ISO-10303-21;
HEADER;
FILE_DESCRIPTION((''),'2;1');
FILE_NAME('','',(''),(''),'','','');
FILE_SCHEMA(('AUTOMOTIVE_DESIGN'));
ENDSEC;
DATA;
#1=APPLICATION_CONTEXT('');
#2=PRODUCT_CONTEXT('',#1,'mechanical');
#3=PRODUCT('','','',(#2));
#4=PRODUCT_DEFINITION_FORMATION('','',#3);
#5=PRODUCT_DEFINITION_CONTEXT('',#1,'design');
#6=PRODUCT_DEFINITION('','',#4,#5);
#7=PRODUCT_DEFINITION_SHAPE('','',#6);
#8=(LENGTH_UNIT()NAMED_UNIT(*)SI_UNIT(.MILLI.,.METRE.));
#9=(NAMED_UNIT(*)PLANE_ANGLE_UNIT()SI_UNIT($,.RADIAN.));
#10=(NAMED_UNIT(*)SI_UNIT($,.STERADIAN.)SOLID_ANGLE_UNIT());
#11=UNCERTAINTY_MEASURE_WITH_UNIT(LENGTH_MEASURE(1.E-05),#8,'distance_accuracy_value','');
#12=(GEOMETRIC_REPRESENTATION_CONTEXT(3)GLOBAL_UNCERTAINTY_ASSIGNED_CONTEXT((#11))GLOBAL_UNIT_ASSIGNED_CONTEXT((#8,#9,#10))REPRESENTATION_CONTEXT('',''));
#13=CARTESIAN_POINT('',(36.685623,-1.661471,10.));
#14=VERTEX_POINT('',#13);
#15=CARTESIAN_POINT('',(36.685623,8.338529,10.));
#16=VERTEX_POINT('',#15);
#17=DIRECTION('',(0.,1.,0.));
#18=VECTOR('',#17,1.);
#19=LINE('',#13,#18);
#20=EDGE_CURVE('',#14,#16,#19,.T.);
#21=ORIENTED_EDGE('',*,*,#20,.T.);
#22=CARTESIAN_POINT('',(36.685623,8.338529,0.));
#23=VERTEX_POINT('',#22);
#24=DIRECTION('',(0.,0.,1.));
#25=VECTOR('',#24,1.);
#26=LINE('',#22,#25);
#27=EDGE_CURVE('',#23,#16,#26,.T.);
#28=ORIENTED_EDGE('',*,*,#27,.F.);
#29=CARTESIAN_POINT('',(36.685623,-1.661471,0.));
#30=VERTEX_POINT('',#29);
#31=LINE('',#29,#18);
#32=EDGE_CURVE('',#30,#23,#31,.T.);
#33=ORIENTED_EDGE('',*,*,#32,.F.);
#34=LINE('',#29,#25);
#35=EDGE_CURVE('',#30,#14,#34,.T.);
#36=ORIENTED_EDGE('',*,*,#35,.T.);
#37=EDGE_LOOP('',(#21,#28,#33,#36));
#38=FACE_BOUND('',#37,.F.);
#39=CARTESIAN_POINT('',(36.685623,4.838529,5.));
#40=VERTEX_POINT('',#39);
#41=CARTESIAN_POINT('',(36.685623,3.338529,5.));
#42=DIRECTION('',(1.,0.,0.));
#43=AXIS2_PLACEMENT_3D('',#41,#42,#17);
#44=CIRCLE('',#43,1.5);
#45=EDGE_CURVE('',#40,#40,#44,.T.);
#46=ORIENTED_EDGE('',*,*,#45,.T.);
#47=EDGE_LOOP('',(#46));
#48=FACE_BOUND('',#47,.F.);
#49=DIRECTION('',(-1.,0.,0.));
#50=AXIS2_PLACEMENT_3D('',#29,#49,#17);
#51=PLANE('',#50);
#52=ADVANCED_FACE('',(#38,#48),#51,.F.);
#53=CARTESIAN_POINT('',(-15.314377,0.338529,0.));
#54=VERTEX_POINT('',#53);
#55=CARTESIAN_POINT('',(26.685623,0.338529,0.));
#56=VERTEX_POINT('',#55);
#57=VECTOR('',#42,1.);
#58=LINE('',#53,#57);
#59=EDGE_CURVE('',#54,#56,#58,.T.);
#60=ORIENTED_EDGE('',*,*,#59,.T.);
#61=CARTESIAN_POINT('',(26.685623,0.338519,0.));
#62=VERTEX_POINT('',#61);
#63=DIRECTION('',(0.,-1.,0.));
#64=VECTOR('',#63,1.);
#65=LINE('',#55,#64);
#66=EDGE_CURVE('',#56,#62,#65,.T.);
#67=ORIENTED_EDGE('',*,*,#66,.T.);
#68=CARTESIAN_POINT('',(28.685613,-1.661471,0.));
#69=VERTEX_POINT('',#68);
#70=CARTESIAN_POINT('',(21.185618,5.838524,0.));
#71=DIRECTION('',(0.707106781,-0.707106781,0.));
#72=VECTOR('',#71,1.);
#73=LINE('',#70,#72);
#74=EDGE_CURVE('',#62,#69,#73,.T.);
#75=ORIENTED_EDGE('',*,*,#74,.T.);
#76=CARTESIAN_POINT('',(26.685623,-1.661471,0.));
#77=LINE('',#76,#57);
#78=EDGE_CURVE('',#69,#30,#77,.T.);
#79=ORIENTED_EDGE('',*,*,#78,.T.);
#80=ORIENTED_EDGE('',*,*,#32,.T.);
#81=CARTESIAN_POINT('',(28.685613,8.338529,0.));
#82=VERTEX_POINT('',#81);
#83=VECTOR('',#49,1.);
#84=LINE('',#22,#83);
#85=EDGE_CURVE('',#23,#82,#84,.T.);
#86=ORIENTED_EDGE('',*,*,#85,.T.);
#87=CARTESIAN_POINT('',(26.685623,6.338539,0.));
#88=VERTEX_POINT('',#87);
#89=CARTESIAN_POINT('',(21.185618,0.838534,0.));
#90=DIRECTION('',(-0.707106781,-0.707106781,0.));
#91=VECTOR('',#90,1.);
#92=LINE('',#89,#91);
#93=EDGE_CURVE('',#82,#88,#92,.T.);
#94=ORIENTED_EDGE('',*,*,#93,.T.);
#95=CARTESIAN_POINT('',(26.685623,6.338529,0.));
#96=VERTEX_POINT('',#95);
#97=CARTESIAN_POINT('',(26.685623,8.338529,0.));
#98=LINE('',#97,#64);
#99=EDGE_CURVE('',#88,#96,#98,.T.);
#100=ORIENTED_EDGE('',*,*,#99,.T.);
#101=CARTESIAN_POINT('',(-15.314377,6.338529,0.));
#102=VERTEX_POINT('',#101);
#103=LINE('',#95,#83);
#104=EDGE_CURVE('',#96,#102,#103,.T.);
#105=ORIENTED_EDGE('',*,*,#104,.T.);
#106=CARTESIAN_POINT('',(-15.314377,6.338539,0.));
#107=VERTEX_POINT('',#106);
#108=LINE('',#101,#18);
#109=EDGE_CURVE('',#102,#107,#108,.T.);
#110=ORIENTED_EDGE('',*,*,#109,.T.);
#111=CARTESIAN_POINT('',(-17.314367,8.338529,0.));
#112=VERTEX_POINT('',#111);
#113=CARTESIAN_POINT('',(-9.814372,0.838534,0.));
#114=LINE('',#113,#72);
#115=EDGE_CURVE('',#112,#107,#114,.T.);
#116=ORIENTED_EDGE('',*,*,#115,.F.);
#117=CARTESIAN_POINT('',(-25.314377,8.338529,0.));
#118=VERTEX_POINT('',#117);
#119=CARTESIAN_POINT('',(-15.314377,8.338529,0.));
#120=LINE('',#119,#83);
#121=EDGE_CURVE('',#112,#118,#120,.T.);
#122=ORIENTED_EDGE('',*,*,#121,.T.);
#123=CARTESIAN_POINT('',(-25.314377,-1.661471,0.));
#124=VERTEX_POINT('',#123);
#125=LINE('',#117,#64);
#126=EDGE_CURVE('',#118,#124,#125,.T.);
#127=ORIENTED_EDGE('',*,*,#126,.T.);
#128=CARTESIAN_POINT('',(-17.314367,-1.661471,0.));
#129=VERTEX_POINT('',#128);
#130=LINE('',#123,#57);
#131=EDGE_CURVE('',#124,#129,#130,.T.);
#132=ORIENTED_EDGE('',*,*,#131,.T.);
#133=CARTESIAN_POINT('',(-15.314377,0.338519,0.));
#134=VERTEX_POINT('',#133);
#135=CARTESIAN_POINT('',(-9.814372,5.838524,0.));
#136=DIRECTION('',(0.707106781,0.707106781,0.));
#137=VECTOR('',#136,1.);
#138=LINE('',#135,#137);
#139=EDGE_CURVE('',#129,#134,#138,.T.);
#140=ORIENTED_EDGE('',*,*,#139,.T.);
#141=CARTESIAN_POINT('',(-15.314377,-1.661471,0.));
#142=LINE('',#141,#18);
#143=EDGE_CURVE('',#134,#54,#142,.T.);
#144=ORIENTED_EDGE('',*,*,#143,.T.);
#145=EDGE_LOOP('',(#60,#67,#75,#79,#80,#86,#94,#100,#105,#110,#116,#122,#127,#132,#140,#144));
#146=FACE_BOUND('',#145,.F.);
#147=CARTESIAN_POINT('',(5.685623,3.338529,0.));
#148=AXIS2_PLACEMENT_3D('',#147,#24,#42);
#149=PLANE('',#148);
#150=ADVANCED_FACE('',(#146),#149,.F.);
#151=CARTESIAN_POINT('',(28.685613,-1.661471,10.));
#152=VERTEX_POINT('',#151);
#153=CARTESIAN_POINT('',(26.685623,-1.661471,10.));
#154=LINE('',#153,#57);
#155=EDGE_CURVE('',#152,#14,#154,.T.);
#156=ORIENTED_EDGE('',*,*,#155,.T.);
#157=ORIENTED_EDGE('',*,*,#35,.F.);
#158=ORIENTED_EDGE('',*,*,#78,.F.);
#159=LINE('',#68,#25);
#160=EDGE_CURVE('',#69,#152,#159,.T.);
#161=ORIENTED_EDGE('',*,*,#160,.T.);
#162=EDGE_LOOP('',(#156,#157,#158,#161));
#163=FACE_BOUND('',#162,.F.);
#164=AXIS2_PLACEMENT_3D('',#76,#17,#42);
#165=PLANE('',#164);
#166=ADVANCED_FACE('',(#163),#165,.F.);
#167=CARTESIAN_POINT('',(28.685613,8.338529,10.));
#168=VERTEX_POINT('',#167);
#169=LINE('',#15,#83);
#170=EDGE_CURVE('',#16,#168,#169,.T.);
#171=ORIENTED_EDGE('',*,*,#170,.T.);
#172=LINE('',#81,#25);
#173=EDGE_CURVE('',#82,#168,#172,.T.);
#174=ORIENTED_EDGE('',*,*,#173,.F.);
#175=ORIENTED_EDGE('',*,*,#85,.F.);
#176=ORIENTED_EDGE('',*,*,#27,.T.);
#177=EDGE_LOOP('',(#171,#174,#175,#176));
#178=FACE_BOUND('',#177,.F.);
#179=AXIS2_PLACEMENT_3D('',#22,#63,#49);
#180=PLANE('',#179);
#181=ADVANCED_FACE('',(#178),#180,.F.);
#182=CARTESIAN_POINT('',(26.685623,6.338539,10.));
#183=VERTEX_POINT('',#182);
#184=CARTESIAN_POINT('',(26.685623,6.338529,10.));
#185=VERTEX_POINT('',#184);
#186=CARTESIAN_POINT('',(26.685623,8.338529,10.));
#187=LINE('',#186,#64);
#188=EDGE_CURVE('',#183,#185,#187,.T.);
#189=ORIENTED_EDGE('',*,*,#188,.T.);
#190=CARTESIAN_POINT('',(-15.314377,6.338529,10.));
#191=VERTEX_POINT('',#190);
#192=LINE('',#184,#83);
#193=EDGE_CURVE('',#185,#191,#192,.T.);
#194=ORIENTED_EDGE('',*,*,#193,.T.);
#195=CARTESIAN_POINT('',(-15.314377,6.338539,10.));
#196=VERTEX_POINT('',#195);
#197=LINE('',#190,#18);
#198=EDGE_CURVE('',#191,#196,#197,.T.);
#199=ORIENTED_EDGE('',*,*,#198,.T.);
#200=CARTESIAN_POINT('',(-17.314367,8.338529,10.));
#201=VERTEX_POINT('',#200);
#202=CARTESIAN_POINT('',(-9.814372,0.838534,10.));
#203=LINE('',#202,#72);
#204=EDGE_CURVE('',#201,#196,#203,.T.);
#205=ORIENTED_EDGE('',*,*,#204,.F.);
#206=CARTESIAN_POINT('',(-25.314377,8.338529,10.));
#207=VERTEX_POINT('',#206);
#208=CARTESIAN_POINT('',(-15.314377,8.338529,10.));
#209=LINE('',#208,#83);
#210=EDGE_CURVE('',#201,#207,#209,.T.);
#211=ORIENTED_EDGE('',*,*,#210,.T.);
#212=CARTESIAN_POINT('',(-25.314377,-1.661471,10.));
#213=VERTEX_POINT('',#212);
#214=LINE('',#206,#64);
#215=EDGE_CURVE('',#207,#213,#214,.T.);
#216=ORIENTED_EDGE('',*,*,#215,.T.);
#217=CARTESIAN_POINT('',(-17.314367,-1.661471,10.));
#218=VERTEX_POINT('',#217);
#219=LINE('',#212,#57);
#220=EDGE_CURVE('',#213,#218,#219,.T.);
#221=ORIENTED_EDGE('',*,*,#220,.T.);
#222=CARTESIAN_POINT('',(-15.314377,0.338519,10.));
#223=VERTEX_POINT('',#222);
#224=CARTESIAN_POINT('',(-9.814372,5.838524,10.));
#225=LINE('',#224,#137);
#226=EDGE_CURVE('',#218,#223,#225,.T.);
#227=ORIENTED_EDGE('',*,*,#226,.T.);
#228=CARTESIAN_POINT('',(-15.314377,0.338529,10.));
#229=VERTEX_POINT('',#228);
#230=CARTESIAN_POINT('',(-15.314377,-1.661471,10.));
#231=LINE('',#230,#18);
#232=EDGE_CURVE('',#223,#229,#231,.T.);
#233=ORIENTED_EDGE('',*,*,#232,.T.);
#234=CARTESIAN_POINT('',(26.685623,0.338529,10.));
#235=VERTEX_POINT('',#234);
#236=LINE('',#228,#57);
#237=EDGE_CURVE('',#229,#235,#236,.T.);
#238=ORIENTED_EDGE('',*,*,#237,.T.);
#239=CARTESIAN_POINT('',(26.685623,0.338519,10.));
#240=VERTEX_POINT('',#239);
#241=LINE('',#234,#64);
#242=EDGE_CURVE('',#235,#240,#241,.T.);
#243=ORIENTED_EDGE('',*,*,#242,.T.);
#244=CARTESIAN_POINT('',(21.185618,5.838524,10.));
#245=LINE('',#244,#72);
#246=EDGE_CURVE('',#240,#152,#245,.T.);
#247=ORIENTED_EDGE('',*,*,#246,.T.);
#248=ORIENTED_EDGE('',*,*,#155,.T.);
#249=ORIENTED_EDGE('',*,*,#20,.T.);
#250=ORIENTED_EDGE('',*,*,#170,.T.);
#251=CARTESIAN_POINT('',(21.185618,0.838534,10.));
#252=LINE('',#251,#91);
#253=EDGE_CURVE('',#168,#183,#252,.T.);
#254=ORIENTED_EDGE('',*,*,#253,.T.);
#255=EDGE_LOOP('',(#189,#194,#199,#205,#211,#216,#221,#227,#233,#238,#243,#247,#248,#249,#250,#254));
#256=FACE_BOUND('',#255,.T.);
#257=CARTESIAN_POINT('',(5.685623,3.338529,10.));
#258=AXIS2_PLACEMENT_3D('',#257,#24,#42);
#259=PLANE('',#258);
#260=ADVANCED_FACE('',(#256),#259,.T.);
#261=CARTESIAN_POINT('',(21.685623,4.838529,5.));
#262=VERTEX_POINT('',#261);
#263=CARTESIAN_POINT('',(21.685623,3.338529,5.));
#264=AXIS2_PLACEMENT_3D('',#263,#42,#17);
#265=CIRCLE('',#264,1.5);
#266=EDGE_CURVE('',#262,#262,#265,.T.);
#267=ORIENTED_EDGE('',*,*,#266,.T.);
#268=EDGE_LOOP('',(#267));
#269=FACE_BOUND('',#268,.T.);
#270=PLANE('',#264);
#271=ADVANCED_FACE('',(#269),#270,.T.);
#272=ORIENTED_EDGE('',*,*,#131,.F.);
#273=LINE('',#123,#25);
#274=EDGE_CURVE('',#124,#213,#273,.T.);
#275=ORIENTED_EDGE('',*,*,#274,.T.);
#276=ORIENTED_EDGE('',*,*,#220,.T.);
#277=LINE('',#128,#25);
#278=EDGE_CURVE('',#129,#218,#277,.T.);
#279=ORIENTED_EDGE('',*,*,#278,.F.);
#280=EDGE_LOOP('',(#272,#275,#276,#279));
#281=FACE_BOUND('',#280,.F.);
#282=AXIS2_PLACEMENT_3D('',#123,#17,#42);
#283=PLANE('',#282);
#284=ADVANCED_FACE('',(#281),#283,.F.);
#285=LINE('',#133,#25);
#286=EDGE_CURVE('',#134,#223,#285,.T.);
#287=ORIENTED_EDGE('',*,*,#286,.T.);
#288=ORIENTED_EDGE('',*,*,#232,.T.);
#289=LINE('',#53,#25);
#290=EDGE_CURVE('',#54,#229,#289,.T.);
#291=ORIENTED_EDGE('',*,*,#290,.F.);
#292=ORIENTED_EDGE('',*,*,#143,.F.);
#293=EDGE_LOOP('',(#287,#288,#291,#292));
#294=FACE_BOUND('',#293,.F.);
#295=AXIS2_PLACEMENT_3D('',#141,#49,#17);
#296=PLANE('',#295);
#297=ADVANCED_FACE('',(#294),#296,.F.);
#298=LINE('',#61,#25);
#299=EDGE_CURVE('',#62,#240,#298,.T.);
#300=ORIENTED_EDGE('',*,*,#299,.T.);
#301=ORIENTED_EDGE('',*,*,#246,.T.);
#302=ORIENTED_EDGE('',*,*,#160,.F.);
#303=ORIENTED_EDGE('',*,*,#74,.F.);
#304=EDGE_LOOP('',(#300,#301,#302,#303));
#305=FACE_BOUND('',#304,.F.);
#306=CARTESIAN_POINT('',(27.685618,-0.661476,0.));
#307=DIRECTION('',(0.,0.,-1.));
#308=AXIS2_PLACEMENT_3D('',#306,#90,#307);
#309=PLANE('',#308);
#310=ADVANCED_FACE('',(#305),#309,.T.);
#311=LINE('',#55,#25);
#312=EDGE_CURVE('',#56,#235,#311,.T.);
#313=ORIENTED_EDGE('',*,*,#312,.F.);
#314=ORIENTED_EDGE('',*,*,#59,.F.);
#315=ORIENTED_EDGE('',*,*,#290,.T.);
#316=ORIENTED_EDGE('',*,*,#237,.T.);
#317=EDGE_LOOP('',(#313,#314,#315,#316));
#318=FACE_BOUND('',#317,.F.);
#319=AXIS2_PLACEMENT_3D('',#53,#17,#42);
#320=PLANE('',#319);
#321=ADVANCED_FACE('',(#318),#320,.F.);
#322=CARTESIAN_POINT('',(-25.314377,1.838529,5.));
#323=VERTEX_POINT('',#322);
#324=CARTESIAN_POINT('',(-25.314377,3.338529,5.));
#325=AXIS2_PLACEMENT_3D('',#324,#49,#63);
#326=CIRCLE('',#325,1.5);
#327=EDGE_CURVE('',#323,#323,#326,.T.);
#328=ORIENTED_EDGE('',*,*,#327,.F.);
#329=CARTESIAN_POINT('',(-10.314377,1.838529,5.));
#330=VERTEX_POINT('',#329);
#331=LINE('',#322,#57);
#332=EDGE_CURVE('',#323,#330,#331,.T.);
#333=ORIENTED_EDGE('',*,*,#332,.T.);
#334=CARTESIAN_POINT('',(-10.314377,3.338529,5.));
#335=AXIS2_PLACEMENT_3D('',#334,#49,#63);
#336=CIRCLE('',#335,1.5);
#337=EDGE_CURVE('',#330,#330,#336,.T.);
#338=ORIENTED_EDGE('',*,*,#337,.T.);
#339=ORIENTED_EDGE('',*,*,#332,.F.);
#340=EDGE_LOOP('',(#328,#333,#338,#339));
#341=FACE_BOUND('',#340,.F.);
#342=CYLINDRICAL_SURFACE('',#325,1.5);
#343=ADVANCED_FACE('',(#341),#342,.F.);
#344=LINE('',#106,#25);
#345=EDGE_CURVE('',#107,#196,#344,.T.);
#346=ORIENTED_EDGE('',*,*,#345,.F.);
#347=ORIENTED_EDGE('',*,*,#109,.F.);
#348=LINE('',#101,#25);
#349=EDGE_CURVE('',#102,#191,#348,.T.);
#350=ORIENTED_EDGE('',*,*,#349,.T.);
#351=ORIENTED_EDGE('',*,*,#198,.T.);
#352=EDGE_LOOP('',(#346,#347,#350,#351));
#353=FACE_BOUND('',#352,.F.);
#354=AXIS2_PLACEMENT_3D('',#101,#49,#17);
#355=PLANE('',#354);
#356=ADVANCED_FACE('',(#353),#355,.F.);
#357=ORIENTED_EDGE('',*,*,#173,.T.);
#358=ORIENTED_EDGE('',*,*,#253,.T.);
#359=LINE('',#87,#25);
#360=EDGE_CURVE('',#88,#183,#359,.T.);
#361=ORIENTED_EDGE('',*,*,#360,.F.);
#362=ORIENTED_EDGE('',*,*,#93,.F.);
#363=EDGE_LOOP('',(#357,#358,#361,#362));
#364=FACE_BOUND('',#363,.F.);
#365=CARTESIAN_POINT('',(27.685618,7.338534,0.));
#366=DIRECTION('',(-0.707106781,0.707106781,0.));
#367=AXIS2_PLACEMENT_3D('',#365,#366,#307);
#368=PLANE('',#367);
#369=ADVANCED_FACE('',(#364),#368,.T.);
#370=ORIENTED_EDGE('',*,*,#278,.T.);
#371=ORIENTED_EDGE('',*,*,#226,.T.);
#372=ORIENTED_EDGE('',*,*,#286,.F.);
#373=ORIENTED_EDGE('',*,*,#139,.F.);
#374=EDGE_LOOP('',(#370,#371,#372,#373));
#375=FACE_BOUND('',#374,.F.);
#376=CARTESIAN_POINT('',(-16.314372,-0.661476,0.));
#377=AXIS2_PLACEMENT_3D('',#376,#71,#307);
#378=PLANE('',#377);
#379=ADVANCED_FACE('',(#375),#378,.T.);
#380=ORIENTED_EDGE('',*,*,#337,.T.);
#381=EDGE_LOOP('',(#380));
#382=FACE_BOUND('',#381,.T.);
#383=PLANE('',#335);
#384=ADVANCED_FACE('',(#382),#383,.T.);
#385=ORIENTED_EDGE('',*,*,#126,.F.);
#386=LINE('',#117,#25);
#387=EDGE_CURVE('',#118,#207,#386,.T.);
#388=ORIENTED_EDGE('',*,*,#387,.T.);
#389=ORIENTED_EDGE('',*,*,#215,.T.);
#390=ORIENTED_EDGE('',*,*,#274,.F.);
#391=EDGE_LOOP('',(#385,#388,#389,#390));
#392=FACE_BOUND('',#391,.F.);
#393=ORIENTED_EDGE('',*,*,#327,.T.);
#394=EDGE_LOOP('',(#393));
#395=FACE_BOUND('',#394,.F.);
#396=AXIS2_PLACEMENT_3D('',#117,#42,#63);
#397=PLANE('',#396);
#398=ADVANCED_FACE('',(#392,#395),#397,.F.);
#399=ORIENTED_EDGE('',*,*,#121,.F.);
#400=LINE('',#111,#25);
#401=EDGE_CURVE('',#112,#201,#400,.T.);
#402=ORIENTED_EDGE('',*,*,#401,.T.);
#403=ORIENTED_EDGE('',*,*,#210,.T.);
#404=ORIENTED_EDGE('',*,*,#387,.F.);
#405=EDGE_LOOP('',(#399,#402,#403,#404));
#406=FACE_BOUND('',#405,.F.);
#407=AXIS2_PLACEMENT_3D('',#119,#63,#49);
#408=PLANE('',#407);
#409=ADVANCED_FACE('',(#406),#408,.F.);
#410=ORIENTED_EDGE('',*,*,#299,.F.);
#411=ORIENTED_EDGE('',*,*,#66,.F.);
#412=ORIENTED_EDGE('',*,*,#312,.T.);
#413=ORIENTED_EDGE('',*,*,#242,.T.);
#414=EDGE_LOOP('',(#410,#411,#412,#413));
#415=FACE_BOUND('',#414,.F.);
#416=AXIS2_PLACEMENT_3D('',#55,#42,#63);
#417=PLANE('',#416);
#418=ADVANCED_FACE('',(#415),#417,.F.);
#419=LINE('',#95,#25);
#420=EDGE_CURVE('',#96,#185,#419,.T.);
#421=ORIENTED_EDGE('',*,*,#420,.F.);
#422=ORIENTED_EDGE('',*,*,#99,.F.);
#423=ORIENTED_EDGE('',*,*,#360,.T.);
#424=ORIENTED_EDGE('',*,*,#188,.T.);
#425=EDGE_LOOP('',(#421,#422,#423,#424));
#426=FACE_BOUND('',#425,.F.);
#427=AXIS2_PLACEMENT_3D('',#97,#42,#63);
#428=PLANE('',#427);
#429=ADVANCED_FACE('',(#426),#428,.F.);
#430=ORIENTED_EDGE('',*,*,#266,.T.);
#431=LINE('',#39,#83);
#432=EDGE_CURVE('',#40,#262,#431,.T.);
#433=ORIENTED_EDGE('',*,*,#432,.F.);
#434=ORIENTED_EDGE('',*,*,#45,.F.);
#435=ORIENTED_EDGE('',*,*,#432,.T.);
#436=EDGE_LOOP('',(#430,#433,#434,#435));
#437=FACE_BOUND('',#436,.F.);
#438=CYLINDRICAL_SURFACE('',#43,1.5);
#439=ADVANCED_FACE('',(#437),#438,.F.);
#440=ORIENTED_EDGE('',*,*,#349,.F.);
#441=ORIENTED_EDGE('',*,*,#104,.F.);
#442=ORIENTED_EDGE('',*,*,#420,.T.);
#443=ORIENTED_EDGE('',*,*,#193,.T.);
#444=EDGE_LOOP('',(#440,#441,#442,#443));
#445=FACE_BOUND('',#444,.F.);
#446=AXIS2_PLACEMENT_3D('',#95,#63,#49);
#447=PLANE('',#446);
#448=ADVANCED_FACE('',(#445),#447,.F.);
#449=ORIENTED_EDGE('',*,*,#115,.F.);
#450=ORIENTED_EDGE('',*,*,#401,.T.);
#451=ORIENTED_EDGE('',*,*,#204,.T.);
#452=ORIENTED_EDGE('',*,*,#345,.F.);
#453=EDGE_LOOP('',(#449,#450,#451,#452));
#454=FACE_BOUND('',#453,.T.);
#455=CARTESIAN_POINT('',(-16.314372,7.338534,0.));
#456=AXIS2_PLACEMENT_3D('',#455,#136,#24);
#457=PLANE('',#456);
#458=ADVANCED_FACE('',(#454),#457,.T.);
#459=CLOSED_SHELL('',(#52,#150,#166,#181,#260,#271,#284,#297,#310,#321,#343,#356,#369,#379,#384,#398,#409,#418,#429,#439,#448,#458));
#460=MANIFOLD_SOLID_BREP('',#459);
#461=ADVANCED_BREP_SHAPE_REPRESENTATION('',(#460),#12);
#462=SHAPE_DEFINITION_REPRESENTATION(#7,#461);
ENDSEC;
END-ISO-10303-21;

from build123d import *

# Parameters (mm, degrees)
F1_DEPTH = 10
F2_SIZE  = 1.99999
F3_R     = 1.5
F4_DEPTH = 15
F5_R     = 1.5
F6_DEPTH = 15


# Not quite as in the source:
# - a fillet or chamfer is up to 0.001 mm smaller than in the source, because OpenCascade refuses the exact size


with BuildPart() as f1:
    # F0 (on Top) → F1 (new body)
    with BuildSketch(Plane.XY):
        Polygon((-15.3143769915, 8.338528797), (-25.3143769915, 8.338528797), (-25.3143769915, -1.661471203), (-15.3143769915, -1.661471203), (-15.3143769915, 0.338528797), (26.6856230085, 0.338528797), (26.6856230085, -1.661471203), (36.6856230085, -1.661471203), (36.6856230085, 8.338528797), (26.6856230085, 8.338528797), (26.6856230085, 6.338528797), (-15.3143769915, 6.338528797), align=None)
    extrude(amount=F1_DEPTH)

    # F2 (size 2 in the source; OpenCascade refuses exactly that, so slightly less here)
    f2_edges = [f1.edges().sort_by_distance(p)[0] for p in [
        (-15.314377, 8.338529, 5),
        (26.685623, 8.338529, 5),
        (-15.314377, -1.661471, 5),
        (26.685623, -1.661471, 5),
    ]]
    chamfer(f2_edges, length=F2_SIZE)

    # F3 (on face) → F4 (cut)
    with BuildSketch(Plane.YZ.offset(36.6856230085)):
        with Locations((3.338528797, 5)):
            Circle(F3_R)
    extrude(amount=-F4_DEPTH, mode=Mode.SUBTRACT)

    # F5 (on face) → F6 (cut)
    with BuildSketch(Plane(origin=(-25.3143769915, 0, 0), x_dir=(0, -1, 0), z_dir=(-1, 0, 0))):
        with Locations((-3.338528797, 5)):
            Circle(F5_R)
    extrude(amount=-F6_DEPTH, mode=Mode.SUBTRACT)


solid = f1.part
